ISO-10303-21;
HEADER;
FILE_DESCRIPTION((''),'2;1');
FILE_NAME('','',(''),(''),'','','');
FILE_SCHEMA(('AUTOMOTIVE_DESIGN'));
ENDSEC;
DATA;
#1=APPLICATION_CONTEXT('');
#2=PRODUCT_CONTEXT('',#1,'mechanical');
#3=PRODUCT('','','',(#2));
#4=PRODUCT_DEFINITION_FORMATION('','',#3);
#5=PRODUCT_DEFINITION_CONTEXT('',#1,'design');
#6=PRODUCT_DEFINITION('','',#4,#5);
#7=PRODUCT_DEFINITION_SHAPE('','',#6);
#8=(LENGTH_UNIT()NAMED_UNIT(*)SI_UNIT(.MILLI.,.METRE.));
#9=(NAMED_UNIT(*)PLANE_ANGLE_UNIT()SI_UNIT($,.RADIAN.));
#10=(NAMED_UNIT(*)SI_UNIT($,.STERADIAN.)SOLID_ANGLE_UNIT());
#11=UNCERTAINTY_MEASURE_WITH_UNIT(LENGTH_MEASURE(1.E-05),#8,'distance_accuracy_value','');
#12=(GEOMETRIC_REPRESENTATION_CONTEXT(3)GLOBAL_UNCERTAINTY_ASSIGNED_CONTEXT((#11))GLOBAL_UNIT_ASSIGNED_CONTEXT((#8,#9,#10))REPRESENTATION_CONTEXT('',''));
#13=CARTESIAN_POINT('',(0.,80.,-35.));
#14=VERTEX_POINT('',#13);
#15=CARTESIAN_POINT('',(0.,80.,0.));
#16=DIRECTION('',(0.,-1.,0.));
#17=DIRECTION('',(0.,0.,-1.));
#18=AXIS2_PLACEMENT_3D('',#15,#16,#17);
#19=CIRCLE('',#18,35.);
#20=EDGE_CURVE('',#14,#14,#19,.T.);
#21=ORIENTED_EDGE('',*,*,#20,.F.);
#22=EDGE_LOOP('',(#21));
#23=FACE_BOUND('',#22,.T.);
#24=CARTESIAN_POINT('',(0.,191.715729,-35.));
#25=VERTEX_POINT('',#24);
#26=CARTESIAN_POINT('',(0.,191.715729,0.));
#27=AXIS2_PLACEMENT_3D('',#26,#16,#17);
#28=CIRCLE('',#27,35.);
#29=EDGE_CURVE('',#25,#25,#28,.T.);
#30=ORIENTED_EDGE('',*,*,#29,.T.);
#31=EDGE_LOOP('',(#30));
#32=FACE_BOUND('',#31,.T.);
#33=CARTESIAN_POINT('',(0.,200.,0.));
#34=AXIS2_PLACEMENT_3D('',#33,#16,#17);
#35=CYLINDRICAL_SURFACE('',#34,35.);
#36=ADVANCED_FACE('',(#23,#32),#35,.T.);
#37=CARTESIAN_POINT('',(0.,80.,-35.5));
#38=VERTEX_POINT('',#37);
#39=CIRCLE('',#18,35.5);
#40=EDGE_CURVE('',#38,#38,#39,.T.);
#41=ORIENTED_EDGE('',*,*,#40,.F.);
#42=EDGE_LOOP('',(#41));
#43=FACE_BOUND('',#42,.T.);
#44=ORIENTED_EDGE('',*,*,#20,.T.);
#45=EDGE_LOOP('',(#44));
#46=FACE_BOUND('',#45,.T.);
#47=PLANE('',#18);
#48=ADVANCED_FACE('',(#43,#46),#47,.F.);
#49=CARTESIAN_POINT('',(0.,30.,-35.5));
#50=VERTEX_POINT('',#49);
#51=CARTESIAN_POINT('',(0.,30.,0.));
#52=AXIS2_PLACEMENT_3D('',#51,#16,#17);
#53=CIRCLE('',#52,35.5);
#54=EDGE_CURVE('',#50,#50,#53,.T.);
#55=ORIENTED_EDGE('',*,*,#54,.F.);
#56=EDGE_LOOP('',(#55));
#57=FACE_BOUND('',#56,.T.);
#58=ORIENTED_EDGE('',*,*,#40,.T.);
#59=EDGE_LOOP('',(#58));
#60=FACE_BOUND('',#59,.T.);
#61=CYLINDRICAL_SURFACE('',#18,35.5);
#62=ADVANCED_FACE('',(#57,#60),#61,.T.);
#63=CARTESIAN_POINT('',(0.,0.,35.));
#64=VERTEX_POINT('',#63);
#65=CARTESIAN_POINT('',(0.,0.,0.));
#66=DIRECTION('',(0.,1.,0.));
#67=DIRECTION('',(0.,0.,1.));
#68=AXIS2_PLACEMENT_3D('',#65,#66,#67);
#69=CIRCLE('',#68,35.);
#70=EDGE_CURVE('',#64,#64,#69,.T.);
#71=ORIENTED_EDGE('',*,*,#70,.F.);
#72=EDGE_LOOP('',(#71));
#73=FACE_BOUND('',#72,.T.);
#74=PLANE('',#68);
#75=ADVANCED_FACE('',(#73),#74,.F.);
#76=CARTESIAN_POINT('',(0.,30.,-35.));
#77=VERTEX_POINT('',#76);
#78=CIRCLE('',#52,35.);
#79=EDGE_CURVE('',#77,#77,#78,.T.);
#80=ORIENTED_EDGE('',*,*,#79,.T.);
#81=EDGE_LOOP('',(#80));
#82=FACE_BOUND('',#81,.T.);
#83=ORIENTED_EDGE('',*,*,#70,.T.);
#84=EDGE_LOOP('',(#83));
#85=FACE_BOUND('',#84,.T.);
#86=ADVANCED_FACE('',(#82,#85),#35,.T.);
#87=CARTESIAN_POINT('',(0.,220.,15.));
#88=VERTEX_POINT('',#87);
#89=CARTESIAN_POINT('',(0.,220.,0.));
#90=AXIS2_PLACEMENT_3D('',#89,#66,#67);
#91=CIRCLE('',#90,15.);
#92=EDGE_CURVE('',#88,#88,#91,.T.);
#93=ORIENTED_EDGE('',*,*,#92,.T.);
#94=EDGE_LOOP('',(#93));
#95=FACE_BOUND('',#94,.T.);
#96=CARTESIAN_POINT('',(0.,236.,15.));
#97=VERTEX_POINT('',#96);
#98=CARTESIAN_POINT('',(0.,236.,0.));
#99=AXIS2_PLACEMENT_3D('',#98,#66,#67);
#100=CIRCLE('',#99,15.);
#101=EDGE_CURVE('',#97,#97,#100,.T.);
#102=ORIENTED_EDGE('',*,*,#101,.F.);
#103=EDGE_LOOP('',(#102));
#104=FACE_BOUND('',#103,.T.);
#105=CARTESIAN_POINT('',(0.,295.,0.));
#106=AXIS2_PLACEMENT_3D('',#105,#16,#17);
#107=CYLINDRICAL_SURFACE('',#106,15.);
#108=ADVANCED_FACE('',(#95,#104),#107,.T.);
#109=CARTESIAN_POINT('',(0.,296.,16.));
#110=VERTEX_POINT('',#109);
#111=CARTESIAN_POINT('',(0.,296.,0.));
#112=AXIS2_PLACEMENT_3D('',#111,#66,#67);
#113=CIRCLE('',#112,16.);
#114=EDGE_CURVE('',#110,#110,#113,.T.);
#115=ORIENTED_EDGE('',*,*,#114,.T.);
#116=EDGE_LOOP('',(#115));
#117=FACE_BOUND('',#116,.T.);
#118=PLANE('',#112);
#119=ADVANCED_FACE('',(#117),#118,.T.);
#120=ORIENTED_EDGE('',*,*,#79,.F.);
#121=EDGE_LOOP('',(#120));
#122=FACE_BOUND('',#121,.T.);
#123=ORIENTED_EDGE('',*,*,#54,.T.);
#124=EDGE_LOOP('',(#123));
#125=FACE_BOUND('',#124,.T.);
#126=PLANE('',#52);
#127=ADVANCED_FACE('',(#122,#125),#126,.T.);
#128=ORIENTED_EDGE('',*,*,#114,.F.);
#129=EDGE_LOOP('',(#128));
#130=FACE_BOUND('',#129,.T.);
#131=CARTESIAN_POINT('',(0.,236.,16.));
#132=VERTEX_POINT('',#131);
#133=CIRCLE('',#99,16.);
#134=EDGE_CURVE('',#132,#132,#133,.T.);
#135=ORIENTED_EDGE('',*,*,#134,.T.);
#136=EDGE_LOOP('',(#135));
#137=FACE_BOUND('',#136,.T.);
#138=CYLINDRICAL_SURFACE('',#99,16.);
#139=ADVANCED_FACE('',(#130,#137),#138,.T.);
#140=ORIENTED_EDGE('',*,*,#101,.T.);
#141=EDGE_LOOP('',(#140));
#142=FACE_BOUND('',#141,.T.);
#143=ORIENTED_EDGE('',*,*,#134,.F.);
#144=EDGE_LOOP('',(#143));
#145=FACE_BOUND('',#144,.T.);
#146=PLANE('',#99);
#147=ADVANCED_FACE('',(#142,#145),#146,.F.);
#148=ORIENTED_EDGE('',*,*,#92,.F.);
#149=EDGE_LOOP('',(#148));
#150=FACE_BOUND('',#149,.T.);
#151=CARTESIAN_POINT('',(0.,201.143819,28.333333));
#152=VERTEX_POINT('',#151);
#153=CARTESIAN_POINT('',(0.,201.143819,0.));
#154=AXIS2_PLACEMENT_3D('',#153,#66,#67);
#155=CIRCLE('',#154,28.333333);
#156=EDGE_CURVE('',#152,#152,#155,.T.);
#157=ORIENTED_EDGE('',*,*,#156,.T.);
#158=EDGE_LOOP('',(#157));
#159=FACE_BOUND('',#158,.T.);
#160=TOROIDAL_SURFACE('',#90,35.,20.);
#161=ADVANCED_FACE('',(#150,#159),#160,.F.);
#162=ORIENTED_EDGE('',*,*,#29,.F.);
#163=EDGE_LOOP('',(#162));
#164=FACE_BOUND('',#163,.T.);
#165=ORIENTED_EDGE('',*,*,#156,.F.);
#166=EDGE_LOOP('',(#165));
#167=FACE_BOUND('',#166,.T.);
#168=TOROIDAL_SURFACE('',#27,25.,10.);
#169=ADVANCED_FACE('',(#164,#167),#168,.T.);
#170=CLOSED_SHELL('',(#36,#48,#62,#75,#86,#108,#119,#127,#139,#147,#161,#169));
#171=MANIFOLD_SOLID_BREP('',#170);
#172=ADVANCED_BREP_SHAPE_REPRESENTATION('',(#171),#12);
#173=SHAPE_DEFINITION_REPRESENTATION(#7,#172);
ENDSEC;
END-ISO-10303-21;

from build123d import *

# Parameters (mm, degrees)
SKETCH2_R           = 35
BOSS_EXTRUDE1_DEPTH = 200
SKETCH3_R           = 15
BOSS_EXTRUDE2_DEPTH = 95
FILLET1_R           = 20
FILLET2_R           = 10
BOSS_EXTRUDE3_START = 1
SKETCH4_R           = 16
BOSS_EXTRUDE3_DEPTH = 60
BOSS_EXTRUDE4_START = -30
SKETCH5_R           = 35.5
BOSS_EXTRUDE4_DEPTH = 50


with BuildPart() as part:
    # Sketch2 → Boss-Extrude1 (new body)
    with BuildSketch(Plane(origin=(0, 0, 0), x_dir=(1, 0, 0), z_dir=(0, 1, 0))):
        with Locations(Location((0, 0, 0), (0, 0, 270))):
            Circle(SKETCH2_R)
    extrude(amount=BOSS_EXTRUDE1_DEPTH)

    # Sketch3 → Boss-Extrude2 (add)
    with BuildSketch(Plane(origin=(0, 200, 0), x_dir=(1, 0, 0), z_dir=(0, 1, 0))):
        with Locations(Location((0, 0, 0), (0, 0, 270))):
            Circle(SKETCH3_R)
    extrude(amount=BOSS_EXTRUDE2_DEPTH)

    # Fillet1
    fillet1_edges = [part.edges().sort_by_distance(p)[0] for p in [
        (0, 200, -15),
    ]]
    fillet(fillet1_edges, radius=FILLET1_R - 0.0001)  # a hair under: the kernel refuses the full size

    # Fillet2
    fillet2_edges = [part.edges().sort_by_distance(p)[0] for p in [
        (0, 200, -35),
    ]]
    fillet(fillet2_edges, radius=FILLET2_R)

    # Sketch4 → Boss-Extrude3 (add)
    with BuildSketch(Plane(origin=(0, 295, 0), x_dir=(1, 0, 0), z_dir=(0, 1, 0)).offset(BOSS_EXTRUDE3_START)):
        with Locations(Location((0, 0, 0), (0, 0, 270))):
            Circle(SKETCH4_R)
    extrude(amount=-BOSS_EXTRUDE3_DEPTH)

    # Sketch5 → Boss-Extrude4 (add)
    with BuildSketch(Plane.XZ.offset(BOSS_EXTRUDE4_START)):
        with Locations(Location((0, 0, 0), (0, 0, 270))):
            Circle(SKETCH5_R)
    extrude(amount=-BOSS_EXTRUDE4_DEPTH)


solid = part.part
